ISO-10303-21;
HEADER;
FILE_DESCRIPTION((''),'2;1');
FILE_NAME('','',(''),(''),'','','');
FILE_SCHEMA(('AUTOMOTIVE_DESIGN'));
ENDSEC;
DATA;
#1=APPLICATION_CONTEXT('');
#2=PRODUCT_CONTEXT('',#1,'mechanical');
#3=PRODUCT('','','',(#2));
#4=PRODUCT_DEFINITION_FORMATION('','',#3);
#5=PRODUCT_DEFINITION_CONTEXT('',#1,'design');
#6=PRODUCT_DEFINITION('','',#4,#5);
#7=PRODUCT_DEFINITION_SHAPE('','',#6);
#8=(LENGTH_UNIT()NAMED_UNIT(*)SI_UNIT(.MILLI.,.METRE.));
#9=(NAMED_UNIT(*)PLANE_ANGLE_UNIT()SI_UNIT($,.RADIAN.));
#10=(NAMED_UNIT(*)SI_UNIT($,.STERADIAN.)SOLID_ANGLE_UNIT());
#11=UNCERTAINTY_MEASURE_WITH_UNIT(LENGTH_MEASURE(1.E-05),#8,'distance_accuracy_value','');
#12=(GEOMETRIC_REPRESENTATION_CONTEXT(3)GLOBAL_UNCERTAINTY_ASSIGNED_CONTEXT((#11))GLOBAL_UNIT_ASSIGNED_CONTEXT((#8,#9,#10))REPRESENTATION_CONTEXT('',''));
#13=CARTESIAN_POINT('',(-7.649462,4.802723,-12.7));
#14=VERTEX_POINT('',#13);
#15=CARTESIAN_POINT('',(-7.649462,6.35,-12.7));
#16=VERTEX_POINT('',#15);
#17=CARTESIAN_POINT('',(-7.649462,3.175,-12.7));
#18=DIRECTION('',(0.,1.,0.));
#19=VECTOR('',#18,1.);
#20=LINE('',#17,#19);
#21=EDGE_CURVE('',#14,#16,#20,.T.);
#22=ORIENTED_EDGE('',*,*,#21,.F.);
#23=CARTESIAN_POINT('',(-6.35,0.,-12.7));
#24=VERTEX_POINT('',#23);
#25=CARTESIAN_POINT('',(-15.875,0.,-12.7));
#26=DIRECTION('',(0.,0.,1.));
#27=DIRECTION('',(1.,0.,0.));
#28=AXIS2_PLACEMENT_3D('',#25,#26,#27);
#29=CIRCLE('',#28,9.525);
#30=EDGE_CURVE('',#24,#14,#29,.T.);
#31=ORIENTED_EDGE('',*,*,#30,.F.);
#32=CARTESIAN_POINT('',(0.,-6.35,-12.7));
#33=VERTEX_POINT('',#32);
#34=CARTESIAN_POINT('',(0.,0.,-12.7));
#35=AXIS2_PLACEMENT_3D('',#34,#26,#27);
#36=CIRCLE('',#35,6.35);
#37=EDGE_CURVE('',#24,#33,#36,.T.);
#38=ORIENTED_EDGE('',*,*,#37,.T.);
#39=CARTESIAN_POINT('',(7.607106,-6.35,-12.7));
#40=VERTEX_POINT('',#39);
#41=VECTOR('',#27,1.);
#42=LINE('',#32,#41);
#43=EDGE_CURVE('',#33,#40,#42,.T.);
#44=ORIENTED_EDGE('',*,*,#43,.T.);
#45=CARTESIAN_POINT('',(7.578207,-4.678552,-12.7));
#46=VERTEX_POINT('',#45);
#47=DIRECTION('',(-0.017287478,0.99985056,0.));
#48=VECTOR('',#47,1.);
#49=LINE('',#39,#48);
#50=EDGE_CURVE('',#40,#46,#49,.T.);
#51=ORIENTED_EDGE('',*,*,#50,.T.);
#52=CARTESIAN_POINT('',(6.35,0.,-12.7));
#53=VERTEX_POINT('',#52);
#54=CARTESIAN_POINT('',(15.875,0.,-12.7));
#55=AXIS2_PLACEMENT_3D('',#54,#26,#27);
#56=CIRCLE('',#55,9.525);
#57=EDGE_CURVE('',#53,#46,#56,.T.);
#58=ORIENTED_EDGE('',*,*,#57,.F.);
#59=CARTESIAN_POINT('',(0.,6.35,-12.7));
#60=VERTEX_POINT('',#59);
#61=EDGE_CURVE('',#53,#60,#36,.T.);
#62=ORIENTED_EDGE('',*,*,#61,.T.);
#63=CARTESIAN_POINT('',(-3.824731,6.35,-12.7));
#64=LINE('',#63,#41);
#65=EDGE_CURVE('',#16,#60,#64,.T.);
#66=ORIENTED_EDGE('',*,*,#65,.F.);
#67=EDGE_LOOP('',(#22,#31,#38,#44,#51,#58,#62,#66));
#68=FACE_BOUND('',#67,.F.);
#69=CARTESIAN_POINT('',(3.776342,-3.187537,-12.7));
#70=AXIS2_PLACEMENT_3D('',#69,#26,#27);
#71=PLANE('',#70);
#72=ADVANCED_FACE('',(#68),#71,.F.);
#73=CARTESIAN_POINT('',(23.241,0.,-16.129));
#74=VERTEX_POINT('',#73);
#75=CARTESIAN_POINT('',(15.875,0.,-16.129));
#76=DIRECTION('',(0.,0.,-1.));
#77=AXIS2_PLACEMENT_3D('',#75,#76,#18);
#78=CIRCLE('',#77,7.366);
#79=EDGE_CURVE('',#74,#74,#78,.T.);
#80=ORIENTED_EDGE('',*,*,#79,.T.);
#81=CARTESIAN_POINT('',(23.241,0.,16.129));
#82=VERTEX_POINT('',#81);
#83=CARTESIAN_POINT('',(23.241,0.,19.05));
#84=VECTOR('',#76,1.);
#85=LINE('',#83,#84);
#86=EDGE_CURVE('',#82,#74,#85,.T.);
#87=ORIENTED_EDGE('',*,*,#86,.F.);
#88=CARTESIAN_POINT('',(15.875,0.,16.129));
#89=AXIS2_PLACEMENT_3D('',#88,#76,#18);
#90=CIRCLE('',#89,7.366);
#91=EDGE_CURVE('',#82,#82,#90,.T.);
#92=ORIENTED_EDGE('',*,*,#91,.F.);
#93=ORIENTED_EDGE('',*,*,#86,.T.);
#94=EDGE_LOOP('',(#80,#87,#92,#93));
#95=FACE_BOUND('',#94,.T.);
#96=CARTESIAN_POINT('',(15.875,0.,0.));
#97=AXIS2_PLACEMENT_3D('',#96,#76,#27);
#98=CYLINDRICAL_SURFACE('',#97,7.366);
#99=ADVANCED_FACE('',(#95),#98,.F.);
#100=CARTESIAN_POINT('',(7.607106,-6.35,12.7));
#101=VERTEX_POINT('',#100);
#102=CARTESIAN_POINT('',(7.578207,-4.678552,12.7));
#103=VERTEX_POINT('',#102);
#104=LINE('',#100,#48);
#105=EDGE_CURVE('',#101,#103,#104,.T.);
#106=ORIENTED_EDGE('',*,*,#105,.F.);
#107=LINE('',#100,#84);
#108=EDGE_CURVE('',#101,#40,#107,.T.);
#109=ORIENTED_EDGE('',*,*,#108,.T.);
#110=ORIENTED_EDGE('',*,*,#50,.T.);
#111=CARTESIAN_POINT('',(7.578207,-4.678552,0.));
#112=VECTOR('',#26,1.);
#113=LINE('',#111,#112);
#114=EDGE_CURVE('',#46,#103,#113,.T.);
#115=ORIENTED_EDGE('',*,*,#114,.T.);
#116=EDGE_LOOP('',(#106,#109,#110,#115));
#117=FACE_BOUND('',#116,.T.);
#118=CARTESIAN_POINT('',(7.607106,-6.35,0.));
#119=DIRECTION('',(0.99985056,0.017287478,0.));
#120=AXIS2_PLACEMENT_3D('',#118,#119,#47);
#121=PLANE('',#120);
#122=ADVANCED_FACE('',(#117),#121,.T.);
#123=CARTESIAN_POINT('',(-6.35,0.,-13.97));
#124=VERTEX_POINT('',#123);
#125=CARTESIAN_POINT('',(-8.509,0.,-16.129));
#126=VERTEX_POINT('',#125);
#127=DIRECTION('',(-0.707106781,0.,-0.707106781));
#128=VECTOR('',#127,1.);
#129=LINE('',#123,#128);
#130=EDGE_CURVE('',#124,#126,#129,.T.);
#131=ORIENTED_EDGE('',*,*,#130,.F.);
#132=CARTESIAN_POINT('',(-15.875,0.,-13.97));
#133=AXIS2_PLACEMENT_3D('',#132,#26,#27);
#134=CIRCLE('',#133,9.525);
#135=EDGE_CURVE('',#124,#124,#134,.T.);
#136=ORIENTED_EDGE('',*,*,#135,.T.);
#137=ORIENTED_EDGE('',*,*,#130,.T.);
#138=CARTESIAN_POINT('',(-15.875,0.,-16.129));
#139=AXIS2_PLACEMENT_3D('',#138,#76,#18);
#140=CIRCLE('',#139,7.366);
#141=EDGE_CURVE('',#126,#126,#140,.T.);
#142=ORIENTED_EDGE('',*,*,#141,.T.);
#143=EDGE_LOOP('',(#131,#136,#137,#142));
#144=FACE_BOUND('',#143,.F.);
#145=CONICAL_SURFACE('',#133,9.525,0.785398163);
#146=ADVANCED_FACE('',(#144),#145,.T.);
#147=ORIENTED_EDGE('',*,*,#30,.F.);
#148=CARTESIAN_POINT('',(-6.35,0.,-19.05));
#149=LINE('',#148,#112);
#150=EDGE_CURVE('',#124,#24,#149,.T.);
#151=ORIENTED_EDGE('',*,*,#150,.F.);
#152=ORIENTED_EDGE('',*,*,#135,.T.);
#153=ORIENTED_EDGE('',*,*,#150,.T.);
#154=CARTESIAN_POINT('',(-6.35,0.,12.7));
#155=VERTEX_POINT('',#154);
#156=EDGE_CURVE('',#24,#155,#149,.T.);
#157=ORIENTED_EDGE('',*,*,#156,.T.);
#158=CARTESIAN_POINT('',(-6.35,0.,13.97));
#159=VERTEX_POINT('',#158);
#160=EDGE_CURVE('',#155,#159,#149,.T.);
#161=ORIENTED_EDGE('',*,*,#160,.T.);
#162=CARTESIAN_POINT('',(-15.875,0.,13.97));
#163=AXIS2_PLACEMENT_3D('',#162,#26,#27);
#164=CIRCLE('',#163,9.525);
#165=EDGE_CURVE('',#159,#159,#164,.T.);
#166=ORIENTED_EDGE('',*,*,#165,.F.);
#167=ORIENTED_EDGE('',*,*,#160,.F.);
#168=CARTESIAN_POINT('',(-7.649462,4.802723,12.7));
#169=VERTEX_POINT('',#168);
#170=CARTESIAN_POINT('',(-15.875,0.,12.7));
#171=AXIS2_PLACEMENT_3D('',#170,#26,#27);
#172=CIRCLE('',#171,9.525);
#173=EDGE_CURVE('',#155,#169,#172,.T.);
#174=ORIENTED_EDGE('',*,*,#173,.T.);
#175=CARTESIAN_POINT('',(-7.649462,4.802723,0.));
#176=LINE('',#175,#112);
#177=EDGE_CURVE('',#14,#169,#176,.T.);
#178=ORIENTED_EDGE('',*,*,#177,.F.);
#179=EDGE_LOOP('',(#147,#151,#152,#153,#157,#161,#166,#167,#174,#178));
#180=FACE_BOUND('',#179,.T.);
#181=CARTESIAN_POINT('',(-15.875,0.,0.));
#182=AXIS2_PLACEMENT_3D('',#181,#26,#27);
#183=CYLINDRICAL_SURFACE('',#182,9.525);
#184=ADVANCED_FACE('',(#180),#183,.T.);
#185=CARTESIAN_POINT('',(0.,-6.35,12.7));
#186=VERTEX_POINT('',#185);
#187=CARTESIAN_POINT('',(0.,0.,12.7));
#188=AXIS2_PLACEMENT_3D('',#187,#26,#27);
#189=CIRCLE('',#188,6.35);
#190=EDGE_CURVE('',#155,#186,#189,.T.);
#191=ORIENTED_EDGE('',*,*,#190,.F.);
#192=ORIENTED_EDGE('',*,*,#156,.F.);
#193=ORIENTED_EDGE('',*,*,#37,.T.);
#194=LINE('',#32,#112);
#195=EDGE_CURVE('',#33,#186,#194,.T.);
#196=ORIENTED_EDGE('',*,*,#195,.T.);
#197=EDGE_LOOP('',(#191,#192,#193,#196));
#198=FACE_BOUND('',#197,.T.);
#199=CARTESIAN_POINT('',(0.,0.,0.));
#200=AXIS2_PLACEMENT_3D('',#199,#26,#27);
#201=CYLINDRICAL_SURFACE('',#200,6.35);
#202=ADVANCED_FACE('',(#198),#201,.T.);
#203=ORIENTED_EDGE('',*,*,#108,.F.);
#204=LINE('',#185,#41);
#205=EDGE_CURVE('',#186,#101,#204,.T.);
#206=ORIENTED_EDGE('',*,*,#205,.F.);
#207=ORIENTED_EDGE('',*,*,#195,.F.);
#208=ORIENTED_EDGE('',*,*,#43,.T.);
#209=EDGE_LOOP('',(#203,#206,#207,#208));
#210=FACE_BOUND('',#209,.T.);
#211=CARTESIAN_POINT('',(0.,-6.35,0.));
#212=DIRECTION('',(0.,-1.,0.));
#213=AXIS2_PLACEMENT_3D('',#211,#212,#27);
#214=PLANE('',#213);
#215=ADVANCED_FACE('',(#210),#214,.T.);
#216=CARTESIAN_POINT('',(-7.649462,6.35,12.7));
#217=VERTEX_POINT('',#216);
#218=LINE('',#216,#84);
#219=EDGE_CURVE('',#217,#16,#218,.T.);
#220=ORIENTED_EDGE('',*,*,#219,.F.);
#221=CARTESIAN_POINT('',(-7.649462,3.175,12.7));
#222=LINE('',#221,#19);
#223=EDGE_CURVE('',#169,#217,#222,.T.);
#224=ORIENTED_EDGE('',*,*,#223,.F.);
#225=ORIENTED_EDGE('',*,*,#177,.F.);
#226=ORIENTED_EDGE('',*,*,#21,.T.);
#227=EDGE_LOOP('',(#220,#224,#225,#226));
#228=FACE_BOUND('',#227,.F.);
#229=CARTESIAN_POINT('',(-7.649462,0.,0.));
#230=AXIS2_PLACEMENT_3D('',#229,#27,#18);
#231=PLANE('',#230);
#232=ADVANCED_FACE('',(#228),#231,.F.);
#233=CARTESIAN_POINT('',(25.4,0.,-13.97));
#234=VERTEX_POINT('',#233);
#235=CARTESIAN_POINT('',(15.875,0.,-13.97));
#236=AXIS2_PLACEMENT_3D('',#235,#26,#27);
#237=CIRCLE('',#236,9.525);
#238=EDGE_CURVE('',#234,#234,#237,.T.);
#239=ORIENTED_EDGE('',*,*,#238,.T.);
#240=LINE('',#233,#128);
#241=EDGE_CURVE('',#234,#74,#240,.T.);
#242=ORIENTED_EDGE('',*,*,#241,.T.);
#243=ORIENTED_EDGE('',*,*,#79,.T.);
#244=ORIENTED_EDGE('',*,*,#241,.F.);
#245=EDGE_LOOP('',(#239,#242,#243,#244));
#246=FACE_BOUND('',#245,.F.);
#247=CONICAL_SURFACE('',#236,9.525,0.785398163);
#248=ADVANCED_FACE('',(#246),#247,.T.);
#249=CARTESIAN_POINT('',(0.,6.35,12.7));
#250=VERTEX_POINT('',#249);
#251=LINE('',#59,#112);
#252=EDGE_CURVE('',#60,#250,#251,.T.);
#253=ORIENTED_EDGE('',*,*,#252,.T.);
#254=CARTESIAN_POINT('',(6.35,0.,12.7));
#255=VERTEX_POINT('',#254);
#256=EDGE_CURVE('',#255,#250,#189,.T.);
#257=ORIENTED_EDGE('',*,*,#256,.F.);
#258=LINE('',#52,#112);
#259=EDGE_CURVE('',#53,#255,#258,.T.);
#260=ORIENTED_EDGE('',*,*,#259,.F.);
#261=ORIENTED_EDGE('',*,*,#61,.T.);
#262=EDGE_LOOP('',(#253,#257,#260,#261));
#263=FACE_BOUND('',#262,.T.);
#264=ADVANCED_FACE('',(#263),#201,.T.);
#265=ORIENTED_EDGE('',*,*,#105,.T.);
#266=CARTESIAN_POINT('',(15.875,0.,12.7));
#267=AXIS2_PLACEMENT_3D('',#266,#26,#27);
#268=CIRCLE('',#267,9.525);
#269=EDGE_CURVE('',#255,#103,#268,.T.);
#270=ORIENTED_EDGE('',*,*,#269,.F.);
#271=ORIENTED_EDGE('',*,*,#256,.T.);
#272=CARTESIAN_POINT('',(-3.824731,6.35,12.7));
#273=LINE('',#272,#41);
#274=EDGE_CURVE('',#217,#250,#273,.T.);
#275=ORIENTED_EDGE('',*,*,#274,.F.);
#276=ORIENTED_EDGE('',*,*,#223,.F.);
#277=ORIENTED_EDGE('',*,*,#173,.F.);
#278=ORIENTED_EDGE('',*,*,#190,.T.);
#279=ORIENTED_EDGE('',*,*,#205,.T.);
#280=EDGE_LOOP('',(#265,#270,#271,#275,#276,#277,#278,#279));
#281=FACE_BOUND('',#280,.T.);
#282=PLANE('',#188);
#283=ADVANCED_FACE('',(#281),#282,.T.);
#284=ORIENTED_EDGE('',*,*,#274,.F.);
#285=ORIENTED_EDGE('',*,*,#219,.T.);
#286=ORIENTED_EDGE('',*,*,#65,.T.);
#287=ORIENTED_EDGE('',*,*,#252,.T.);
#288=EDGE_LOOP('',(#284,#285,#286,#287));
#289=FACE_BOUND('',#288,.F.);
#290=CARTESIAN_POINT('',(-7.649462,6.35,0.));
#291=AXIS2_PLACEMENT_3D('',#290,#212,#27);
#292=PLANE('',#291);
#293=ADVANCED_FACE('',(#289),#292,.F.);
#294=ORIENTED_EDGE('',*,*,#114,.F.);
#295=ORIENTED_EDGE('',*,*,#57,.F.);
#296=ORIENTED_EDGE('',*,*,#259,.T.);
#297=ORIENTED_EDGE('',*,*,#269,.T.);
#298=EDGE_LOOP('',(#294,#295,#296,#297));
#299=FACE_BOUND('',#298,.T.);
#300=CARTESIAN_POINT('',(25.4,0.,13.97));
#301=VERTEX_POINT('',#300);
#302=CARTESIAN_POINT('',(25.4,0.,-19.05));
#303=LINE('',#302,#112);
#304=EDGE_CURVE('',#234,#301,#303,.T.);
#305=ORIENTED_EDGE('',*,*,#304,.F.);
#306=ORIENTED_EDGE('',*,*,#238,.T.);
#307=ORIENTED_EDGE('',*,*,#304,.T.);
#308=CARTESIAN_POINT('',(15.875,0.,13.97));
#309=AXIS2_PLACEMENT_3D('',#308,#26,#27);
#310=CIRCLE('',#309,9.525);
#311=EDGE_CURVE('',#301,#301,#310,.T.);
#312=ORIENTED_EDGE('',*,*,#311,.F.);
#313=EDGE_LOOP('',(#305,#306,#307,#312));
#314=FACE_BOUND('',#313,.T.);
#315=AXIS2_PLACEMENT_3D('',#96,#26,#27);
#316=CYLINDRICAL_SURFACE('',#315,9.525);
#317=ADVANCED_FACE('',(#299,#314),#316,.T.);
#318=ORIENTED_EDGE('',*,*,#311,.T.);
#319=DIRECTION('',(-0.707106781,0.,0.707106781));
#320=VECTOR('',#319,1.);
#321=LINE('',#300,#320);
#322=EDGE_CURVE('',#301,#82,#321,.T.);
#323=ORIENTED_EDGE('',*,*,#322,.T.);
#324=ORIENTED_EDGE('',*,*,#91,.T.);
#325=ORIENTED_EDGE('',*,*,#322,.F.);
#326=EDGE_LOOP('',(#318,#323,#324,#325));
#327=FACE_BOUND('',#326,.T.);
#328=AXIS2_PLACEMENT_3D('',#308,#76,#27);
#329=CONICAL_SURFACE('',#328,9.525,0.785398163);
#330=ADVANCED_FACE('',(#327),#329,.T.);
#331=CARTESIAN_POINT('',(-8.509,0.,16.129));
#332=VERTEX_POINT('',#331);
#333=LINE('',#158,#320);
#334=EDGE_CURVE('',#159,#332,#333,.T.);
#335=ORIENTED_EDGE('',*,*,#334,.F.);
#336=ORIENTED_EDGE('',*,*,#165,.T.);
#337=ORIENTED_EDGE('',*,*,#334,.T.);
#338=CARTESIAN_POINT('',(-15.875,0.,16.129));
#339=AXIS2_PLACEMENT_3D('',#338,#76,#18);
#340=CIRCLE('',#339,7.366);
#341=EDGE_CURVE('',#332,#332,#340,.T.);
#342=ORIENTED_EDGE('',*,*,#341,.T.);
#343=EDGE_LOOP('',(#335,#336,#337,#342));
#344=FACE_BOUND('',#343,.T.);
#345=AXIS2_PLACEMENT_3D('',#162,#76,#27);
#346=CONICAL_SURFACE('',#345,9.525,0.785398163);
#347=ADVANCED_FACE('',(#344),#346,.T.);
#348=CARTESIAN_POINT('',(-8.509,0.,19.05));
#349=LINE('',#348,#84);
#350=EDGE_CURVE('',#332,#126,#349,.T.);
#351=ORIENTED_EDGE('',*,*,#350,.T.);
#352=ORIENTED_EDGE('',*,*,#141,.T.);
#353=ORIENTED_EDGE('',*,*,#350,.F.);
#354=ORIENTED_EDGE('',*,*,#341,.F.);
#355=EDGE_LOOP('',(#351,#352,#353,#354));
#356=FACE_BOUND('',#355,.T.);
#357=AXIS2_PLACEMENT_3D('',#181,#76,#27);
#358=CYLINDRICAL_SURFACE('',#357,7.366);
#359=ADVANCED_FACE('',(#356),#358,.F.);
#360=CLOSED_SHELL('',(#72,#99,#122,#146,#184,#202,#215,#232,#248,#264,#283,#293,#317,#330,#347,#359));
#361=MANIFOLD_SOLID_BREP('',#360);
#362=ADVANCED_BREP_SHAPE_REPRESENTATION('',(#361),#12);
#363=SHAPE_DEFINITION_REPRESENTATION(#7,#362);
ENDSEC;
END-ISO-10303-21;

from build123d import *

# Parameters (mm, degrees)
F0_R     = 9.525
F0_R_2   = 7.366
F1_DEPTH = 19.05
F2_R     = 6.35
F3_DEPTH = 12.7
F4_W     = 7.6494621422
F4_H     = 6.35
F5_DEPTH = 12.7


# Not quite as in the source:
# - a fillet or chamfer that OpenCascade refuses, or shapes differently, is made with other operations: its cross-section is extruded or revolved along the edge and cut away or added


with BuildPart() as f1:
    # F0 (on Top) → F1 (new body, symmetric)
    with BuildSketch(Plane.XY):
        with Locations((-15.875, 0)):
            Circle(F0_R)
        with Locations((-15.875, 0)):
            Circle(F0_R_2, mode=Mode.SUBTRACT)
    extrude(amount=F1_DEPTH, both=True)



with BuildPart() as f1b:
    # F0 (on Top) → F1, piece 2 (new body, symmetric)
    with BuildSketch(Plane.XY):
        with Locations((15.875, 0)):
            Circle(F0_R)
        with Locations((15.875, 0)):
            Circle(F0_R_2, mode=Mode.SUBTRACT)
    extrude(amount=F1_DEPTH, both=True)


with BuildPart() as f1_1:
    add(f1.part)

    add(f1b.part)  # F3 merges F1b
    # F2 (on Top) → F3 (join, symmetric)
    with BuildSketch(Plane.XY):
        Circle(F2_R)
    extrude(amount=F3_DEPTH, both=True)

    # F4 (on Top) → F5 (join, symmetric)
    with BuildSketch(Plane.XY):
        with Locations((-3.8247310711, 3.175)):
            Rectangle(F4_W, F4_H)
        Polygon((7.4973143637, 0), (0, 0), (0, -6.35), (7.6071062533, -6.35), align=None)
    extrude(amount=F5_DEPTH, both=True)

    # F6: chamfer of 5.08 on 4 edges, made by hand

    # F6_s1 → F6_t2 (revolve, cut)
    with BuildSketch(Plane.XZ):
        Polygon((25.4, 13.97), (20.32, 19.05), (25.4, 19.05), align=None)
    revolve(axis=Axis((15.875, 0, 19.05), (0, 0, 1)), mode=Mode.SUBTRACT)

    # F6_s3 → F6_t4 (revolve, cut)
    with BuildSketch(Plane.XZ):
        Polygon((-6.35, 13.97), (-11.43, 19.05), (-6.35, 19.05), align=None)
    revolve(axis=Axis((-15.875, 0, 19.05), (0, 0, 1)), mode=Mode.SUBTRACT)

    # F6_s5 → F6_t6 (revolve, cut)
    with BuildSketch(Plane.XZ):
        Polygon((25.4, -13.97), (20.32, -19.05), (25.4, -19.05), align=None)
    revolve(axis=Axis((15.875, 0, -19.05), (0, 0, 1)), mode=Mode.SUBTRACT)

    # F6_s7 → F6_t8 (revolve, cut)
    with BuildSketch(Plane.XZ):
        Polygon((-6.35, -13.97), (-11.43, -19.05), (-6.35, -19.05), align=None)
    revolve(axis=Axis((-15.875, 0, -19.05), (0, 0, 1)), mode=Mode.SUBTRACT)


solid = f1_1.part
